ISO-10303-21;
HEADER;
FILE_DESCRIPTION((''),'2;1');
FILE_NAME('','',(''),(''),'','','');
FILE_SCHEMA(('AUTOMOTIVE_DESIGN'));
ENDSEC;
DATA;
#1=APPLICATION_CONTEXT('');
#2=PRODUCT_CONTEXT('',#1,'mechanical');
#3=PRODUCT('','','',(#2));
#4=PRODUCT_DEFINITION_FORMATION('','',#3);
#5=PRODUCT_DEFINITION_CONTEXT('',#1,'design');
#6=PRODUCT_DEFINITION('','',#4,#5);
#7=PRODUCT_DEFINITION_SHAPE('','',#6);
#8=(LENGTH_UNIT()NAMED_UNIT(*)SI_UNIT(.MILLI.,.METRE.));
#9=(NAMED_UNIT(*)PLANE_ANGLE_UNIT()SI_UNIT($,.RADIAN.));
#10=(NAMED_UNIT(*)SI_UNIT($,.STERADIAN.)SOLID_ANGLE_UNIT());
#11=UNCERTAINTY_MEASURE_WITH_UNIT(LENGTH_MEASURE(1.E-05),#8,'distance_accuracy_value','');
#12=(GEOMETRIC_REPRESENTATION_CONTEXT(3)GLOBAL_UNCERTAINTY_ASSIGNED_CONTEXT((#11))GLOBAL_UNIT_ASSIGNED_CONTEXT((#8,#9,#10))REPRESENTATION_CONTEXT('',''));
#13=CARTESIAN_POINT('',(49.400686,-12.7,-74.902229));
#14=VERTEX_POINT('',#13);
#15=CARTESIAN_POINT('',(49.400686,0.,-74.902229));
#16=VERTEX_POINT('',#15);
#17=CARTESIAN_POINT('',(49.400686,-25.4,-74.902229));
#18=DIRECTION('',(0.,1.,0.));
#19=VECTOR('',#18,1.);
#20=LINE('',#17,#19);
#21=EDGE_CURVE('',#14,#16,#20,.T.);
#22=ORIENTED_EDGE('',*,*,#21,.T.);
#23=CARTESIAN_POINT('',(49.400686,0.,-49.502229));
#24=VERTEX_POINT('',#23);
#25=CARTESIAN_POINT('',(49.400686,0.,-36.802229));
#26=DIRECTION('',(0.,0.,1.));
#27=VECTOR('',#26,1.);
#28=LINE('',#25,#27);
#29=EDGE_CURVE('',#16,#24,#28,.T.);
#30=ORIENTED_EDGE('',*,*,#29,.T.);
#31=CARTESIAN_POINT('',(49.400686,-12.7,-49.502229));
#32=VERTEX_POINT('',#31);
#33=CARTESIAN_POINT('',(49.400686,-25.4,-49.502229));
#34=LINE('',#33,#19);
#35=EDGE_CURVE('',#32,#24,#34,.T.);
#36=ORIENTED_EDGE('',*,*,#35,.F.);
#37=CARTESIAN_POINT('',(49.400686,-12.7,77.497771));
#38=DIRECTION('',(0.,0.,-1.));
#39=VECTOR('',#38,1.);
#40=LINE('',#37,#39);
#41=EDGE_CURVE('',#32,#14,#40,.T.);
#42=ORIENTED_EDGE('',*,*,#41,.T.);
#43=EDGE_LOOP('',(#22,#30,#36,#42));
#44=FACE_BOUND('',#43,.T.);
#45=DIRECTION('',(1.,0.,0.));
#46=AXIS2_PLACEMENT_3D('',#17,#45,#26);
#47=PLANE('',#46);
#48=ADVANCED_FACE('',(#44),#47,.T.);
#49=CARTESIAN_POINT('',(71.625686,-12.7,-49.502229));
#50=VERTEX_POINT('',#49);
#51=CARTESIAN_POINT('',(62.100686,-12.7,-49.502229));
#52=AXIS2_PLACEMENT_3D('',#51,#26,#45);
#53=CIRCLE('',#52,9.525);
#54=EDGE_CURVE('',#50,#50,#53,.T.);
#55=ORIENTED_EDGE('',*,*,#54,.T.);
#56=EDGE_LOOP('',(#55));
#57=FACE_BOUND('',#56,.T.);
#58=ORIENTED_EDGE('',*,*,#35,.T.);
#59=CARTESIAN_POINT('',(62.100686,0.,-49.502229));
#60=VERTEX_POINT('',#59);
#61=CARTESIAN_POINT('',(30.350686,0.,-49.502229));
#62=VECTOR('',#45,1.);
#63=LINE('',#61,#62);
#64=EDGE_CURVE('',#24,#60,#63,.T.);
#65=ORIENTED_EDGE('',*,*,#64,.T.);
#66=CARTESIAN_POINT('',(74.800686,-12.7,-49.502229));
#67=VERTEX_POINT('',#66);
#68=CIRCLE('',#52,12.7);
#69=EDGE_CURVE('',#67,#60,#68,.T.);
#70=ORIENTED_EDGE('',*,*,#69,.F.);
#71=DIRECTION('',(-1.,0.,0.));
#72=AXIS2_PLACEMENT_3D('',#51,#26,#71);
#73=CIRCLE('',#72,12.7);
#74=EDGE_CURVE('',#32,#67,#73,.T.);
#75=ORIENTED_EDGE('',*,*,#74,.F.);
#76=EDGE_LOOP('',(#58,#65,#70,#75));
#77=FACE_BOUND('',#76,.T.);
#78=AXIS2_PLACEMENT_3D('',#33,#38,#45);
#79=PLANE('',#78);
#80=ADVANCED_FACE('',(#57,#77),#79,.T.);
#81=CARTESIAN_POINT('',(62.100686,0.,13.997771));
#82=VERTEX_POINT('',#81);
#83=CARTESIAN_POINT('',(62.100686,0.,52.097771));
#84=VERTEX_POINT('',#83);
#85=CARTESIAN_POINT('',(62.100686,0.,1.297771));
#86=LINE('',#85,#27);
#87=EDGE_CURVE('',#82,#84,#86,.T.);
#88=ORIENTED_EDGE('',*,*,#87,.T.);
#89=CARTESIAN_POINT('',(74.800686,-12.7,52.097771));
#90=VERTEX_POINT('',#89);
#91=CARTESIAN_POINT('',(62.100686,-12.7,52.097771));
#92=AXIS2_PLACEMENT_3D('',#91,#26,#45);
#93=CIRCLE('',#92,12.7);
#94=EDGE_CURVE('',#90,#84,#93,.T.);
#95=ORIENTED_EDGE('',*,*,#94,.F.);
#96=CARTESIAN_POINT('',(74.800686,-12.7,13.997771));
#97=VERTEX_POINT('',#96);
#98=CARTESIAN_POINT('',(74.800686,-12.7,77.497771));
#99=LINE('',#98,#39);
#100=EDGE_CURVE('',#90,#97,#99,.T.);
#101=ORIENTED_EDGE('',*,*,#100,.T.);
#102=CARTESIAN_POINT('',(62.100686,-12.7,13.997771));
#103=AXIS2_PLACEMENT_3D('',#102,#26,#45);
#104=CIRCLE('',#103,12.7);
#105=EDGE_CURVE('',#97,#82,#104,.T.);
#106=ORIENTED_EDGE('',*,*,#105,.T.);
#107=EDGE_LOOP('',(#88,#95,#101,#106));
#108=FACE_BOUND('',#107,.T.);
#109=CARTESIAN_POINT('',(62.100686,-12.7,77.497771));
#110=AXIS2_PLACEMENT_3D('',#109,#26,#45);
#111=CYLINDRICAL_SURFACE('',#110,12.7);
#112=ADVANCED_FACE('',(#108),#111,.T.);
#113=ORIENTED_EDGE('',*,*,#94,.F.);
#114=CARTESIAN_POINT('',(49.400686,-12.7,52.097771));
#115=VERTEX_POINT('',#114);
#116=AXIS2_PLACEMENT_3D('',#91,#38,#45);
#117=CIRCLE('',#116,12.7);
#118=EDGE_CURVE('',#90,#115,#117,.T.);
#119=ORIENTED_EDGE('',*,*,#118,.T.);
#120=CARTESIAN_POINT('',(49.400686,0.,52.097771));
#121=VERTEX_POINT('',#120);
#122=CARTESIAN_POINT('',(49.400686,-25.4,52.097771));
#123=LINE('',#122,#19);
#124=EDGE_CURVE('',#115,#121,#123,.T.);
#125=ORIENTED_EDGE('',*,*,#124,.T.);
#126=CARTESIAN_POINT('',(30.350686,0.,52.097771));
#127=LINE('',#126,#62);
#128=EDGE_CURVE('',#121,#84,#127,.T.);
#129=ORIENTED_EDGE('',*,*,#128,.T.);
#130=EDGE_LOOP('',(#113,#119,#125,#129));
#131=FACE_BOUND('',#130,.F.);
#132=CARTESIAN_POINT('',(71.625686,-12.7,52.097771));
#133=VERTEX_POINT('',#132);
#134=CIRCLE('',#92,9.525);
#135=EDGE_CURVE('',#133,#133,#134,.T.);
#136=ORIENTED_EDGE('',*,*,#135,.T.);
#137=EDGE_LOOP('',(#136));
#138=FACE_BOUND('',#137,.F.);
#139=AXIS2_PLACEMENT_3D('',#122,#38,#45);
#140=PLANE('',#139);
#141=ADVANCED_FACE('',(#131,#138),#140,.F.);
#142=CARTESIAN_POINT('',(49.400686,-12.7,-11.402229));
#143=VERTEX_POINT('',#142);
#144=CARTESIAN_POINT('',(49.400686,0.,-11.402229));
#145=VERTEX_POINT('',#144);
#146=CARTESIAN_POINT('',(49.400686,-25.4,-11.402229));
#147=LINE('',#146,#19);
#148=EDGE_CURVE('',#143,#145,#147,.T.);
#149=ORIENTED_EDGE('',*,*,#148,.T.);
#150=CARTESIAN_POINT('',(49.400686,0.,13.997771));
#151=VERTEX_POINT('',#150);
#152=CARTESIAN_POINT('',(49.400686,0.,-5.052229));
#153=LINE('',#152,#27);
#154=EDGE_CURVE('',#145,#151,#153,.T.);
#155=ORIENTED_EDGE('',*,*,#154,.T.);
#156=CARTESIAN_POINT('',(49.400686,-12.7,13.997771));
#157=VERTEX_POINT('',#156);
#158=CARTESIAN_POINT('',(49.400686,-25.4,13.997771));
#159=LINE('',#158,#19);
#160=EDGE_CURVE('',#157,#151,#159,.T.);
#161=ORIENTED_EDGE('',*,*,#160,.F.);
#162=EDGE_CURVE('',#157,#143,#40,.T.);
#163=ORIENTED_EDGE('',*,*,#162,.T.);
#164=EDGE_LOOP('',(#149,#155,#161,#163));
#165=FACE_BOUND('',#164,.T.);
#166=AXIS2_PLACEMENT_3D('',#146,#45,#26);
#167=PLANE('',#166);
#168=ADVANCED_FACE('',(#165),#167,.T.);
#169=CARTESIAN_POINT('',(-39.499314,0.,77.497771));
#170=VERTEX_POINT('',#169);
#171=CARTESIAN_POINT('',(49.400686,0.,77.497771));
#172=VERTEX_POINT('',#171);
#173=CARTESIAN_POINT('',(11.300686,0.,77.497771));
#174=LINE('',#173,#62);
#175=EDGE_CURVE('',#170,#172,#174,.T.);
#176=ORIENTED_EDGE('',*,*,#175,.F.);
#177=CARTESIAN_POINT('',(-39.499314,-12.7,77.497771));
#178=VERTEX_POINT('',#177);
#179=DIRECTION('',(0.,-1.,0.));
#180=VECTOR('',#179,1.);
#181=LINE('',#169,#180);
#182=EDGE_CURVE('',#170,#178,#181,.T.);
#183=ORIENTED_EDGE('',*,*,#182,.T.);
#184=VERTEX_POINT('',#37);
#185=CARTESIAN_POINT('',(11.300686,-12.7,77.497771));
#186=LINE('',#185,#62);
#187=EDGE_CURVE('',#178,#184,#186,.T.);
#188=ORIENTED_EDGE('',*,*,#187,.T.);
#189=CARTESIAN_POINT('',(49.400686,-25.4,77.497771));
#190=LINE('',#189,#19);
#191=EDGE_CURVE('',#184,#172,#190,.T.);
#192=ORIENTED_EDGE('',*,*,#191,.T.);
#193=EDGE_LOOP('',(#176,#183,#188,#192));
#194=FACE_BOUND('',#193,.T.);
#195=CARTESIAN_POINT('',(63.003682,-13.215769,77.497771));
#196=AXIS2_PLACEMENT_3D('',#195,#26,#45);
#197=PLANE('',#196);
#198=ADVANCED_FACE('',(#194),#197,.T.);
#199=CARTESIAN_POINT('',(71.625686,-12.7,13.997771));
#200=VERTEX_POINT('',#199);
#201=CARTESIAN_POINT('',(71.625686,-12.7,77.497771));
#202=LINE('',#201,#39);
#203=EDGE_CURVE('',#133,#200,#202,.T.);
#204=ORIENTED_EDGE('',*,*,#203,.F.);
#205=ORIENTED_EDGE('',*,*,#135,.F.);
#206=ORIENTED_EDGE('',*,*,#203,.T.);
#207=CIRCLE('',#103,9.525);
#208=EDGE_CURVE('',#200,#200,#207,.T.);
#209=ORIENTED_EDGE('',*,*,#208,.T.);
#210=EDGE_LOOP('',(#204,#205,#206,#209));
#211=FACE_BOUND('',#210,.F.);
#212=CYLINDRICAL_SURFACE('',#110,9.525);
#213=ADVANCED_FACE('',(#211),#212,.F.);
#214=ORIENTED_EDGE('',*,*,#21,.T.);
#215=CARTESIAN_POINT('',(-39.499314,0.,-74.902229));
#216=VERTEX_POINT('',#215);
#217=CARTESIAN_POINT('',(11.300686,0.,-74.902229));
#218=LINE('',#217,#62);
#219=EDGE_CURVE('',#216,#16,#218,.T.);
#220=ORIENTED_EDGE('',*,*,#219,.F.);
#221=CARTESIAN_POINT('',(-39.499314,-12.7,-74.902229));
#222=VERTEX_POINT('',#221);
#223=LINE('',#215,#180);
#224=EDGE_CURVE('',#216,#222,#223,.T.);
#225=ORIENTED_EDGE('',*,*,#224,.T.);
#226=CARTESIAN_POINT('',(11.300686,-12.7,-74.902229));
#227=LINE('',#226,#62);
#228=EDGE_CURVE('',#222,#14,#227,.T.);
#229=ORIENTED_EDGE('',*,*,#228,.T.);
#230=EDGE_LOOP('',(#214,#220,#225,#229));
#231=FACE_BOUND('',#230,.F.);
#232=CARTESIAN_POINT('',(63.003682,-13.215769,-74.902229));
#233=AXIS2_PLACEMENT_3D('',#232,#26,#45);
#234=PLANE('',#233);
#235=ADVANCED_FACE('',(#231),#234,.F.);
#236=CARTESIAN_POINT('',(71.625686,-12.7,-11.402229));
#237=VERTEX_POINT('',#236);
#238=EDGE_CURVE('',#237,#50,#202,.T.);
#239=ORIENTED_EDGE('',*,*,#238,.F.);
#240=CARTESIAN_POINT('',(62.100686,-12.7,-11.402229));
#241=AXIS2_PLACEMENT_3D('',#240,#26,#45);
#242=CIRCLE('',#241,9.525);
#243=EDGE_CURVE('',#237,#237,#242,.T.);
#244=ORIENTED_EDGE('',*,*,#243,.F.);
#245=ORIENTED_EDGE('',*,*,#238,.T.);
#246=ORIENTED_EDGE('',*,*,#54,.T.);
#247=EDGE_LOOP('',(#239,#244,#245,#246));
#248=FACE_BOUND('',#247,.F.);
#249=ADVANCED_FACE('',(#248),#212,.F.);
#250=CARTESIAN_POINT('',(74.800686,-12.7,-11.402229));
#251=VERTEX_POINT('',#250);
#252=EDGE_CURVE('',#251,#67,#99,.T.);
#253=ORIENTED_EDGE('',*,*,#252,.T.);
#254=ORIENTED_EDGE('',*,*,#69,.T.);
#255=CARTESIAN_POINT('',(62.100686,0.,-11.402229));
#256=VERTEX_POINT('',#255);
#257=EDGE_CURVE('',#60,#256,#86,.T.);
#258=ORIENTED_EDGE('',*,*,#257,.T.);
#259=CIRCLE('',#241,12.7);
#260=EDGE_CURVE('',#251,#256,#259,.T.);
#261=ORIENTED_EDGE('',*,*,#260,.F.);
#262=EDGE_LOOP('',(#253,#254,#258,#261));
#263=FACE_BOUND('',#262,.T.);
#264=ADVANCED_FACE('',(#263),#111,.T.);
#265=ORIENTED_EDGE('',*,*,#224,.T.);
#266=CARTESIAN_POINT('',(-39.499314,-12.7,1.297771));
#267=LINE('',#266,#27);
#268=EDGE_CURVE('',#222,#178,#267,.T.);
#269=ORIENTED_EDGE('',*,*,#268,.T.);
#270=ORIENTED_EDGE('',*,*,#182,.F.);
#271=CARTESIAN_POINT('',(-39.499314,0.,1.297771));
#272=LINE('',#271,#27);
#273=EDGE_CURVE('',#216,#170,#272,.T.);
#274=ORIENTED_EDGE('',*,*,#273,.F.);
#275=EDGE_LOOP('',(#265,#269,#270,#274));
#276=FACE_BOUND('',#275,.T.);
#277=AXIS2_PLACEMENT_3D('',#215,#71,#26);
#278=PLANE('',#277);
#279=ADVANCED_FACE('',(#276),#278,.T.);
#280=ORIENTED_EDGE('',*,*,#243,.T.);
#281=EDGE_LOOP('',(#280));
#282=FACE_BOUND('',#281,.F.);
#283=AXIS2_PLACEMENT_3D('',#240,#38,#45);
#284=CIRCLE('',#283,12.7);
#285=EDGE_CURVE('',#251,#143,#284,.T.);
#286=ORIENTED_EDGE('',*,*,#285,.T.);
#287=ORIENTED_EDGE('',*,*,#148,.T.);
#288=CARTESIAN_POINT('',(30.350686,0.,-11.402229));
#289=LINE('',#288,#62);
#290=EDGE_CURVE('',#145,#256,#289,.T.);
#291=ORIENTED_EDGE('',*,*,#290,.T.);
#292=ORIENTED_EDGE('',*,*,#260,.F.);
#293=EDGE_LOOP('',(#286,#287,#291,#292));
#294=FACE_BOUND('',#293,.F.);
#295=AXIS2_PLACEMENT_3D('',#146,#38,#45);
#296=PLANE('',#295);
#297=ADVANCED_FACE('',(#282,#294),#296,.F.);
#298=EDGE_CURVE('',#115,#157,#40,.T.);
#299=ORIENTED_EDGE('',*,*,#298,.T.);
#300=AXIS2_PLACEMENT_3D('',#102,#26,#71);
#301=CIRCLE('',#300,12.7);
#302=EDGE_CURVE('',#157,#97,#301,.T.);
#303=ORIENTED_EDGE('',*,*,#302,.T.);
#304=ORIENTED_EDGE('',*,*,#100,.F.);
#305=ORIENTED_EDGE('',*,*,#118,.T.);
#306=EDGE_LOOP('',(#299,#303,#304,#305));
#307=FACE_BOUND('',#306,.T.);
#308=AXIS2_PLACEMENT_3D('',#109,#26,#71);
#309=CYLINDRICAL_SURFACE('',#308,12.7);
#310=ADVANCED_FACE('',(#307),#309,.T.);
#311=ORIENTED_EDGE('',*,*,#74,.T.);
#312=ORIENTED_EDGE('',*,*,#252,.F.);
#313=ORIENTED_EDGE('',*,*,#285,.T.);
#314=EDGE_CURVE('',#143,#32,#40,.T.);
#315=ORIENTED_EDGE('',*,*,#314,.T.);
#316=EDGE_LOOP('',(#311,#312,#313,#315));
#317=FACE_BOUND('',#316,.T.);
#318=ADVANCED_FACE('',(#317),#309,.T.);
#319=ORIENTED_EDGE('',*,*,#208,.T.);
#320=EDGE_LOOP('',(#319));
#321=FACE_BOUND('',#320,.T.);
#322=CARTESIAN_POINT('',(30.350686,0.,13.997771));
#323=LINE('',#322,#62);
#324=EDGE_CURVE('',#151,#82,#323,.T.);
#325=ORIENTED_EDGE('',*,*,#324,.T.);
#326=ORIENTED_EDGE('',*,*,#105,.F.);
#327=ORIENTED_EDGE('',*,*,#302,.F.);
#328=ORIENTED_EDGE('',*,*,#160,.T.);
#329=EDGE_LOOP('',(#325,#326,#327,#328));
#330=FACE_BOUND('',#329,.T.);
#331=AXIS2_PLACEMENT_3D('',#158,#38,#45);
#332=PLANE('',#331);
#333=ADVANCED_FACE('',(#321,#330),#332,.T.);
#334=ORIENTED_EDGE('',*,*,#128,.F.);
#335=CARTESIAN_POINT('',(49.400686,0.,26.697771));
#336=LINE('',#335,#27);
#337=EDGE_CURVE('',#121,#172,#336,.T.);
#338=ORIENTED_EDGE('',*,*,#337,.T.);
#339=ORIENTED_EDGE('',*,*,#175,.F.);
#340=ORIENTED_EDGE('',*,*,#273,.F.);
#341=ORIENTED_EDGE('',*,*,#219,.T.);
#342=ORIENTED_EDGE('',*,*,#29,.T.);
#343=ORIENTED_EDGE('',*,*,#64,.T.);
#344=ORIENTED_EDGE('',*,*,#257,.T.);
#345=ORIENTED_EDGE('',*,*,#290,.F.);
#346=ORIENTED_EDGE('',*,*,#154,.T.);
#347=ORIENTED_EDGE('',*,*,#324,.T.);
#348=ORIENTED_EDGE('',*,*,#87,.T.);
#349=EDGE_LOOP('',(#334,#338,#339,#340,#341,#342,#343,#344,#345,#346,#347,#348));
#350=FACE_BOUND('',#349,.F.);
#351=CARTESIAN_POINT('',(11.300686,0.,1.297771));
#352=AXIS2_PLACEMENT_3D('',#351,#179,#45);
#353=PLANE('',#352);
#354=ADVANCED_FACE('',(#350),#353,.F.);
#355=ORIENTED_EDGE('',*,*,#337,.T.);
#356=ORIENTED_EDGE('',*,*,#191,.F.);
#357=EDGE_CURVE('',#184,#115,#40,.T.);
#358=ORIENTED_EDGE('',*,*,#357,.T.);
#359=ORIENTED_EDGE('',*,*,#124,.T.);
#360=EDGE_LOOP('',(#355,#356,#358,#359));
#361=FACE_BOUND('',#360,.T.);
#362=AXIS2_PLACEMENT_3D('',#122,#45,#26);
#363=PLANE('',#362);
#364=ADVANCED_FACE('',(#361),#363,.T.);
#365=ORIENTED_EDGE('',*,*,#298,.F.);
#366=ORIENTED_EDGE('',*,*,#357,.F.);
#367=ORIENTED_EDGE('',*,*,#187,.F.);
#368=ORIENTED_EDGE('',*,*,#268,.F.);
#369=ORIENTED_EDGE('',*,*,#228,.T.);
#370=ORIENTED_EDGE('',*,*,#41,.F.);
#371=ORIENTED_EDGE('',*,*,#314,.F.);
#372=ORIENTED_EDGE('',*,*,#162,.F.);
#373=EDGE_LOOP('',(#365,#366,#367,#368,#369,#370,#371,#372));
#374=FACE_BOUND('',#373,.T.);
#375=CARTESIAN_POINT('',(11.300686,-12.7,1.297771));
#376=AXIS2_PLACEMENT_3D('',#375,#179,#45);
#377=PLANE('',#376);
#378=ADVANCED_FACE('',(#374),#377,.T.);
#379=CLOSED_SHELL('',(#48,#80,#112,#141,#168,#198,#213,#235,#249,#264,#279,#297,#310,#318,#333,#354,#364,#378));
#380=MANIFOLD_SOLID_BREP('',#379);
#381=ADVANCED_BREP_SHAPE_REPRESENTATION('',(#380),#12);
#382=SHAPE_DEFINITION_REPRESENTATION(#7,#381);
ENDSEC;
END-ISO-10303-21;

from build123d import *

# Parameters (mm, degrees)
F0_W     = 101.6
F0_H     = 152.4
F1_DEPTH = 12.7
F3_DEPTH = 152.4
F4_R     = 9.525
F5_DEPTH = 152.4
F7_W     = 50.8
F7_H     = 25.4
F8_DEPTH = 50.8


# Not quite as in the source:
# - a feature names something its author has since deleted; it is built from what else it names


with BuildPart() as f1:
    # F0 (on Front) → F1 (new body)
    with BuildSketch(Plane.XZ):
        with Locations((11.3006858155, 1.2977712616)):
            Rectangle(F0_W, F0_H)
    extrude(amount=F1_DEPTH)

    # F2 (on face) → F3 (join)
    with BuildSketch(Plane.XY.offset(77.4977712616)):
        with BuildLine():
            ThreePointArc((49.4006858155, -12.7), (62.1006858155, -25.4), (74.8006858155, -12.7))
            ThreePointArc((74.8006858155, -12.7), (71.0809419366, -3.7197438789), (62.1006858155, 0))
            Line((62.1006858155, 0), (62.1006858155, -12.7))
            Line((62.1006858155, -12.7), (49.4006858155, -12.7))
        make_face()
    extrude(amount=-F3_DEPTH)

    # F4 (on face) → F5 (cut, through all)
    with BuildSketch(Plane.XY.offset(77.4977712616)):
        with Locations((62.1006858155, -12.7)):
            Circle(F4_R)
    extrude(amount=-F5_DEPTH, mode=Mode.SUBTRACT)

    # F7 (on offset) → F8 (cut)
    with BuildSketch(Plane.XZ.offset(25.4)):
        with Locations((74.8006858155, 64.7977712616)):
            Rectangle(F7_W, F7_H)
        with Locations((74.8006858155, -62.2022287384)):
            Rectangle(F7_W, F7_H)
        with Locations((74.8006858155, 1.2977712616)):
            Rectangle(F7_W, F7_H)
    extrude(amount=-F8_DEPTH, mode=Mode.SUBTRACT)


solid = f1.part
